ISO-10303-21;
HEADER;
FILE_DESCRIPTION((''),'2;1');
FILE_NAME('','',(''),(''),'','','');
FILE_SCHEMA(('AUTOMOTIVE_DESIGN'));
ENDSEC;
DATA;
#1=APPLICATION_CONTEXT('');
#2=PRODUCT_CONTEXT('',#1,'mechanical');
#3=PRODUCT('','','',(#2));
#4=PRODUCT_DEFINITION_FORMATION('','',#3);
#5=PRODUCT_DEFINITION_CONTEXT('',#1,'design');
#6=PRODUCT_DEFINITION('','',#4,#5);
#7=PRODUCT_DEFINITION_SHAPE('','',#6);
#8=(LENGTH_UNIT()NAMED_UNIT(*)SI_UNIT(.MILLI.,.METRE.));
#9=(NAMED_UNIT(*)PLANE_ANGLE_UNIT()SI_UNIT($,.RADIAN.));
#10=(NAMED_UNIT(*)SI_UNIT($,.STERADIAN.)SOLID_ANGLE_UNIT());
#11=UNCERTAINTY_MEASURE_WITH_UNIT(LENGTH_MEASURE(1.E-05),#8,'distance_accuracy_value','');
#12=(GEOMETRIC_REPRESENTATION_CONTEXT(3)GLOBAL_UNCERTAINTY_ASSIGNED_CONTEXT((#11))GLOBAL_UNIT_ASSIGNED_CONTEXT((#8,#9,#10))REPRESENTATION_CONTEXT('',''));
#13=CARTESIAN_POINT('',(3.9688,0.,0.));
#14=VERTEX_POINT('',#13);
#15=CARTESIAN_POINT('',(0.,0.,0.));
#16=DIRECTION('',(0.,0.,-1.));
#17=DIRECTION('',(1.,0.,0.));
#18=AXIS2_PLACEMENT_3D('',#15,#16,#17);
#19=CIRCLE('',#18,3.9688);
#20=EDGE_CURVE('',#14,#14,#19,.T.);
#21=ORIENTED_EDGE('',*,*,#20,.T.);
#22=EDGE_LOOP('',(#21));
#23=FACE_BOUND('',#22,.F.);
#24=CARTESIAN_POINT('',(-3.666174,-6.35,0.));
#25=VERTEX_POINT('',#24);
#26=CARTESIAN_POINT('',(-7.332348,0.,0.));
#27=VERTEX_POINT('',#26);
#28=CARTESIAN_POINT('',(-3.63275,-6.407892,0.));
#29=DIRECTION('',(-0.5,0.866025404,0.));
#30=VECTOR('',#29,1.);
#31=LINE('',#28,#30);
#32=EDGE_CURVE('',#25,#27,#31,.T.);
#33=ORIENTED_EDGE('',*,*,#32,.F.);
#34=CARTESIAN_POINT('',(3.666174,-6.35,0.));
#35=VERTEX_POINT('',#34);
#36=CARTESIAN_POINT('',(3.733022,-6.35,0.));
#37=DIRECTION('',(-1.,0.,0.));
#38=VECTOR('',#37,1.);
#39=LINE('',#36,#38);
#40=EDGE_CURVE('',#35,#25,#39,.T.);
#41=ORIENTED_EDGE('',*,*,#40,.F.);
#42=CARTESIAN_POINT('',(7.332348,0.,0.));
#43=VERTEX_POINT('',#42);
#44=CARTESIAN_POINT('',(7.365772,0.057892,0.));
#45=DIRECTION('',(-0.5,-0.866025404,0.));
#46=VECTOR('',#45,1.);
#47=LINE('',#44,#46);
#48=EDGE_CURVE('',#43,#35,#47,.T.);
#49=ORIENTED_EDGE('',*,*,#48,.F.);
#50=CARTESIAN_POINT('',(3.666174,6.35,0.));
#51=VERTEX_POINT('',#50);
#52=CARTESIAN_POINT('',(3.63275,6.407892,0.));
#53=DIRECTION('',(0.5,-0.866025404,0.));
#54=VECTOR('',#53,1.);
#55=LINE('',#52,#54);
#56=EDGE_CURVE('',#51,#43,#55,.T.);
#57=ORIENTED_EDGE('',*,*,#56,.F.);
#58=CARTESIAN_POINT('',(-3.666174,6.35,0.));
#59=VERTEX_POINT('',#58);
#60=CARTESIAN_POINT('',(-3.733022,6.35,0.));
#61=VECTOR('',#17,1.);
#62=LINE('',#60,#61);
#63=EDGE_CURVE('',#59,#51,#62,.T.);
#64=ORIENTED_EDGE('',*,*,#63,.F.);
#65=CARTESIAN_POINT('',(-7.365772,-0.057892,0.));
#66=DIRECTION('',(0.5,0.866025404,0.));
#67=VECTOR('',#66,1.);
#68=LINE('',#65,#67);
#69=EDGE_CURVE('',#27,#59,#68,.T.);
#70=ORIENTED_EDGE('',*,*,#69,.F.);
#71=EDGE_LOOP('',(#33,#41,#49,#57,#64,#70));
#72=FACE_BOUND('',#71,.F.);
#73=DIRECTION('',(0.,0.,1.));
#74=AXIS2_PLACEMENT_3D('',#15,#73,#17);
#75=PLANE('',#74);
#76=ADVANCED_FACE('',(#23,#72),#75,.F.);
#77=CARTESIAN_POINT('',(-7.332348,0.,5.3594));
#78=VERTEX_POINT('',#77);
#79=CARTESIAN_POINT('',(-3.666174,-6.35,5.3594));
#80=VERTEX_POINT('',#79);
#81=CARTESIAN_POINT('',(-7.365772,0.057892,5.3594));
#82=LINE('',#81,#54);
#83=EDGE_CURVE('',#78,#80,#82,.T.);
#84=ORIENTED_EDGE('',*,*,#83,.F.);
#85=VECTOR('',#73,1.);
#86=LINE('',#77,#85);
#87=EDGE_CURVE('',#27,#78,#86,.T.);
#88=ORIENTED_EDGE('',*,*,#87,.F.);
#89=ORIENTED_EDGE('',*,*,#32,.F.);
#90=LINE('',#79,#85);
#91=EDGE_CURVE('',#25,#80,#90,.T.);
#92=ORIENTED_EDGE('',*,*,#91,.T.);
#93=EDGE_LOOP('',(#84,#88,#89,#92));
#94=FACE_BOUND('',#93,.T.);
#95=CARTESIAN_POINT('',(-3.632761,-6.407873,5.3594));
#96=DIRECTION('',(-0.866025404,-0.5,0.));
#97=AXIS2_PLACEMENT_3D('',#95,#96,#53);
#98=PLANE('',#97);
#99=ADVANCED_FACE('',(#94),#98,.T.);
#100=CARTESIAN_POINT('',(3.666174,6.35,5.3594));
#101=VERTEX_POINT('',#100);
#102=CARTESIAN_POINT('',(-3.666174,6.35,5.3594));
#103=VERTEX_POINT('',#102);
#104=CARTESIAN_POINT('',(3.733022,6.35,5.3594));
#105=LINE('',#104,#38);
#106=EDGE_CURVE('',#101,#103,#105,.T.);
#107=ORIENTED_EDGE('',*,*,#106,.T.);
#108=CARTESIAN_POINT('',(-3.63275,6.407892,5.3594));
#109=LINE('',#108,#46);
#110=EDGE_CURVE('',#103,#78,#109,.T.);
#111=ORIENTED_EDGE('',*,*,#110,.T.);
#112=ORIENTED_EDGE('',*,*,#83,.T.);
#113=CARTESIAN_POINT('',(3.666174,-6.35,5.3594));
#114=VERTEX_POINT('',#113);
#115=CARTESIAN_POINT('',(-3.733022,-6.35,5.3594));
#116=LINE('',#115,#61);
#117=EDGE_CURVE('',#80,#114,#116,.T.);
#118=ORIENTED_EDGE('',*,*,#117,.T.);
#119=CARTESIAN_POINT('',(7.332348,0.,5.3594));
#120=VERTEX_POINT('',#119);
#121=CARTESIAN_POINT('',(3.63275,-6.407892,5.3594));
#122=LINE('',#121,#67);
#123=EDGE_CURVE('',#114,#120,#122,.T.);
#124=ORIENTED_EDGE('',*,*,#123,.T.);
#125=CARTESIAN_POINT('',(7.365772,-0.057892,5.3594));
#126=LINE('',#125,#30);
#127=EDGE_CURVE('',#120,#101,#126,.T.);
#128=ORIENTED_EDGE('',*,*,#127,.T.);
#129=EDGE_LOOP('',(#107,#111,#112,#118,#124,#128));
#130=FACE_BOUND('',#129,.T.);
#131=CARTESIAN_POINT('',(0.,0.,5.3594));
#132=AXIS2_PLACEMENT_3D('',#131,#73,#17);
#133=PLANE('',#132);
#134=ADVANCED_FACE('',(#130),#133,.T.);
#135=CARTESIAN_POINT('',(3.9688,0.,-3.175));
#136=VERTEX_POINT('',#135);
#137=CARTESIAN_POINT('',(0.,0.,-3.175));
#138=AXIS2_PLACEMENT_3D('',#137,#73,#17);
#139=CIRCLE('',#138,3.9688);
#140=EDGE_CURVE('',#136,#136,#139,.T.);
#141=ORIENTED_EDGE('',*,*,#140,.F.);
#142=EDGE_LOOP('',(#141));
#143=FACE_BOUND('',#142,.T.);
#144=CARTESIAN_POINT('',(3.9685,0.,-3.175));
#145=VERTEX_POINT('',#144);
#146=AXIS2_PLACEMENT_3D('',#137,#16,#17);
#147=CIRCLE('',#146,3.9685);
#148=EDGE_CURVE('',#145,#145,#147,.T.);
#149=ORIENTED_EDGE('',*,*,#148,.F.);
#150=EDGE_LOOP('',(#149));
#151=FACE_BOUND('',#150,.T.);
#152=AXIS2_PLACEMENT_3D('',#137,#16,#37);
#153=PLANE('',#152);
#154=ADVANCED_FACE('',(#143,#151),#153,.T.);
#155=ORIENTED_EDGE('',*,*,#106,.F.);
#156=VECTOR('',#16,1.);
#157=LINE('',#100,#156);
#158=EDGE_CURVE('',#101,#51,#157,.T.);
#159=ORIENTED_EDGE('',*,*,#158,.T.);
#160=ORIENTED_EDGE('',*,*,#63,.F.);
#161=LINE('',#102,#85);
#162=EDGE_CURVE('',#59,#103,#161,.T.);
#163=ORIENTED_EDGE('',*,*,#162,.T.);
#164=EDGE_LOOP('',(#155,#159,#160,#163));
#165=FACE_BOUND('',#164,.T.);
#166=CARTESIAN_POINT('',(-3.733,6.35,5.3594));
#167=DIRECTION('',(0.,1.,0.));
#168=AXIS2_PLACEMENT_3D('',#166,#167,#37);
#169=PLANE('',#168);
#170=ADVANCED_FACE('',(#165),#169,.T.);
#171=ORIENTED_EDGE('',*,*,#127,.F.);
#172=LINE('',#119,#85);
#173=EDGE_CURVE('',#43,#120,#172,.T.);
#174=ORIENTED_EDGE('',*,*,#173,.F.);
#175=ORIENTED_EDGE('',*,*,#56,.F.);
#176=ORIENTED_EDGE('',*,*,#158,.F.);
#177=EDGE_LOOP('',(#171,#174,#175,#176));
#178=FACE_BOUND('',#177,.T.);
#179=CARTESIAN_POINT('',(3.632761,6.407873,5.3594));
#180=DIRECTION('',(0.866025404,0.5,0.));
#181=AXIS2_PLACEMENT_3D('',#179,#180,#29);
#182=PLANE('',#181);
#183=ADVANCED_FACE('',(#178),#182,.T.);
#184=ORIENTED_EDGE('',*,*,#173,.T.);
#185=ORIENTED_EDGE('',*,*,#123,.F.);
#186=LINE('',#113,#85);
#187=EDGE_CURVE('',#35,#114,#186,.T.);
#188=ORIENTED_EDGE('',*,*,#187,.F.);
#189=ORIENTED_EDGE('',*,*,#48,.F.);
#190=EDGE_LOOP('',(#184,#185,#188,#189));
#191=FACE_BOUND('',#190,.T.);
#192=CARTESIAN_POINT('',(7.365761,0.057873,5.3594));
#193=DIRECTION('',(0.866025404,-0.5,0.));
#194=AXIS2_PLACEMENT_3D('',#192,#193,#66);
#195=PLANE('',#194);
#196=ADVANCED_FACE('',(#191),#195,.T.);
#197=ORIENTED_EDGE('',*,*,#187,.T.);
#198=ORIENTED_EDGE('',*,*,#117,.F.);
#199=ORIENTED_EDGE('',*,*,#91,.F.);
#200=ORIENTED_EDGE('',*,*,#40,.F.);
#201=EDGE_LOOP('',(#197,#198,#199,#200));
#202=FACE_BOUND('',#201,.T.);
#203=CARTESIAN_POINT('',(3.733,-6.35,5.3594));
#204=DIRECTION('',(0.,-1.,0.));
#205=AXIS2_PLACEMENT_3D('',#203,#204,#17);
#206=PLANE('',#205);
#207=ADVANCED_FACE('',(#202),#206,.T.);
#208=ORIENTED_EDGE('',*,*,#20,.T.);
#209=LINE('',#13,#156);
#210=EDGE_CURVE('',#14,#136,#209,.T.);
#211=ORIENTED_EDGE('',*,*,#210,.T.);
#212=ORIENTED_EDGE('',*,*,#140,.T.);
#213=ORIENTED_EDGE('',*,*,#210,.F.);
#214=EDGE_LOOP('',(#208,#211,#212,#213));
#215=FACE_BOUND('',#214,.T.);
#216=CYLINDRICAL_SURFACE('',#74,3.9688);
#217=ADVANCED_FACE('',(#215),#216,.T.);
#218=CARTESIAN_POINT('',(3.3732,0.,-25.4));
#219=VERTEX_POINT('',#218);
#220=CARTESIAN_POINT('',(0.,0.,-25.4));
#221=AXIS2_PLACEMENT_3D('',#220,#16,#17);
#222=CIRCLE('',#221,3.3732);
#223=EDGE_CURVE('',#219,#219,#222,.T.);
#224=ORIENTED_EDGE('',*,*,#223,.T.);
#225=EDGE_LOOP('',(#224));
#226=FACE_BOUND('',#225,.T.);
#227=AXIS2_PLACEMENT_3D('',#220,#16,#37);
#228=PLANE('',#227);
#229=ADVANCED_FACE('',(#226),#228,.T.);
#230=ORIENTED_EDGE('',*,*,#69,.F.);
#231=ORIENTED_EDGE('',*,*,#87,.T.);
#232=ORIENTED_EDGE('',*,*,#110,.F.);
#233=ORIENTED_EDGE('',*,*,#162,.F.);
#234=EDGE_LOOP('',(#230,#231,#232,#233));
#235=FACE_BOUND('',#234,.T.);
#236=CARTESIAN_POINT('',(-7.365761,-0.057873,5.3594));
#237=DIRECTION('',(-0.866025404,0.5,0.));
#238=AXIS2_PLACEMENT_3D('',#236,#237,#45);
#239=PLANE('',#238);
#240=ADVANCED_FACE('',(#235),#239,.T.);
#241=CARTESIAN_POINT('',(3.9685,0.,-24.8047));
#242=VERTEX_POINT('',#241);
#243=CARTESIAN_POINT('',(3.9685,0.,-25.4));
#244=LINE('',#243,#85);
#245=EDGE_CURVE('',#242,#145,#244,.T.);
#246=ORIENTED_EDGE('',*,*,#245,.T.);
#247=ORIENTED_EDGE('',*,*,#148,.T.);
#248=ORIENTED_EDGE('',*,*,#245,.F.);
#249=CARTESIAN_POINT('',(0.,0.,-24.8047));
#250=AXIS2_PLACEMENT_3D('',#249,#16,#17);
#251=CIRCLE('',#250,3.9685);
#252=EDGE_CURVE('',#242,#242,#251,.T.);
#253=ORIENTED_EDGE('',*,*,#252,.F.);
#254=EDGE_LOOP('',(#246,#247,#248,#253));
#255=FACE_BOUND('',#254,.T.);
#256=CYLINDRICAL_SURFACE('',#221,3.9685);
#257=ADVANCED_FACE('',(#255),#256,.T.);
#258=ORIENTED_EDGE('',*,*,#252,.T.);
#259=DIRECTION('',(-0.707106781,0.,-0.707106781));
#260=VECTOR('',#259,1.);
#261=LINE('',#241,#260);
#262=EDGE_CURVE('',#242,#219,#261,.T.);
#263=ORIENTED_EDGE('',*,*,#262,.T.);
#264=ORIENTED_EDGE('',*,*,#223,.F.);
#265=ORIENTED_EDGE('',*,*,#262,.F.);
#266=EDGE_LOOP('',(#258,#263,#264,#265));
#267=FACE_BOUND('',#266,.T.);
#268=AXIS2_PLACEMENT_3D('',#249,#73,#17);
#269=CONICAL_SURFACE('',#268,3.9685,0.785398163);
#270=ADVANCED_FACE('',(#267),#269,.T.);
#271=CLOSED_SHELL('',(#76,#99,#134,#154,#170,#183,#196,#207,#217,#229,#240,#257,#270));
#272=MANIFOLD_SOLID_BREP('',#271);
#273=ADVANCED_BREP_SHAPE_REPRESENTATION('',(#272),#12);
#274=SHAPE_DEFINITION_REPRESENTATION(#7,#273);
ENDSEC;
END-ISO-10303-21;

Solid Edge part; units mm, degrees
sketch "Sketch1" plane through (0, 0, 0) normal (0, 0, 1) x (1, 0, 0)
  circle A0 centre (0, 0) radius 7.366
  dimension "D1" = 14.732
extrude "Protrusion1" add sketch "Sketch1" along normal blind 5.3594
sketch "Sketch2" plane through (0, 0, 0) normal (0, 0, -1) x (1, 0, 0)
  circle A0 centre (0, 0) radius 3.9688
extrude "Protrusion2" add sketch "Sketch2" along normal blind 25.4
sketch "Sketch3" plane through (0, 0, -25.4) normal (0, 0, -1) x (1, 0, 0)
  circle A0 centre (0, 0) radius 3.9685
extrude "Cutout1" cut sketch "Sketch3" against normal blind 22.225 flip side to cut
chamfer "Chamfer_1" distance 0.5953 angle 45 1 edges at (-3.9685, 0, -25.4)
sketch "Sketch4" plane through (0, 0, 5.3594) normal (0, 0, 1) x (1, 0, 0)
  line L0 (-3.733, 6.35) -> (3.733, 6.35)
  dimension "D1" = 12.7
extrude "Cutout2" cut sketch "Sketch4" against normal up to next material side at (0, 6.4, 5.3594)
pattern_circular "Pattern1" count 6 over 360 about axis through (0, 0, 5.3594) along (0, 0, 1) of "Cutout2"
properties part number "24101143"
